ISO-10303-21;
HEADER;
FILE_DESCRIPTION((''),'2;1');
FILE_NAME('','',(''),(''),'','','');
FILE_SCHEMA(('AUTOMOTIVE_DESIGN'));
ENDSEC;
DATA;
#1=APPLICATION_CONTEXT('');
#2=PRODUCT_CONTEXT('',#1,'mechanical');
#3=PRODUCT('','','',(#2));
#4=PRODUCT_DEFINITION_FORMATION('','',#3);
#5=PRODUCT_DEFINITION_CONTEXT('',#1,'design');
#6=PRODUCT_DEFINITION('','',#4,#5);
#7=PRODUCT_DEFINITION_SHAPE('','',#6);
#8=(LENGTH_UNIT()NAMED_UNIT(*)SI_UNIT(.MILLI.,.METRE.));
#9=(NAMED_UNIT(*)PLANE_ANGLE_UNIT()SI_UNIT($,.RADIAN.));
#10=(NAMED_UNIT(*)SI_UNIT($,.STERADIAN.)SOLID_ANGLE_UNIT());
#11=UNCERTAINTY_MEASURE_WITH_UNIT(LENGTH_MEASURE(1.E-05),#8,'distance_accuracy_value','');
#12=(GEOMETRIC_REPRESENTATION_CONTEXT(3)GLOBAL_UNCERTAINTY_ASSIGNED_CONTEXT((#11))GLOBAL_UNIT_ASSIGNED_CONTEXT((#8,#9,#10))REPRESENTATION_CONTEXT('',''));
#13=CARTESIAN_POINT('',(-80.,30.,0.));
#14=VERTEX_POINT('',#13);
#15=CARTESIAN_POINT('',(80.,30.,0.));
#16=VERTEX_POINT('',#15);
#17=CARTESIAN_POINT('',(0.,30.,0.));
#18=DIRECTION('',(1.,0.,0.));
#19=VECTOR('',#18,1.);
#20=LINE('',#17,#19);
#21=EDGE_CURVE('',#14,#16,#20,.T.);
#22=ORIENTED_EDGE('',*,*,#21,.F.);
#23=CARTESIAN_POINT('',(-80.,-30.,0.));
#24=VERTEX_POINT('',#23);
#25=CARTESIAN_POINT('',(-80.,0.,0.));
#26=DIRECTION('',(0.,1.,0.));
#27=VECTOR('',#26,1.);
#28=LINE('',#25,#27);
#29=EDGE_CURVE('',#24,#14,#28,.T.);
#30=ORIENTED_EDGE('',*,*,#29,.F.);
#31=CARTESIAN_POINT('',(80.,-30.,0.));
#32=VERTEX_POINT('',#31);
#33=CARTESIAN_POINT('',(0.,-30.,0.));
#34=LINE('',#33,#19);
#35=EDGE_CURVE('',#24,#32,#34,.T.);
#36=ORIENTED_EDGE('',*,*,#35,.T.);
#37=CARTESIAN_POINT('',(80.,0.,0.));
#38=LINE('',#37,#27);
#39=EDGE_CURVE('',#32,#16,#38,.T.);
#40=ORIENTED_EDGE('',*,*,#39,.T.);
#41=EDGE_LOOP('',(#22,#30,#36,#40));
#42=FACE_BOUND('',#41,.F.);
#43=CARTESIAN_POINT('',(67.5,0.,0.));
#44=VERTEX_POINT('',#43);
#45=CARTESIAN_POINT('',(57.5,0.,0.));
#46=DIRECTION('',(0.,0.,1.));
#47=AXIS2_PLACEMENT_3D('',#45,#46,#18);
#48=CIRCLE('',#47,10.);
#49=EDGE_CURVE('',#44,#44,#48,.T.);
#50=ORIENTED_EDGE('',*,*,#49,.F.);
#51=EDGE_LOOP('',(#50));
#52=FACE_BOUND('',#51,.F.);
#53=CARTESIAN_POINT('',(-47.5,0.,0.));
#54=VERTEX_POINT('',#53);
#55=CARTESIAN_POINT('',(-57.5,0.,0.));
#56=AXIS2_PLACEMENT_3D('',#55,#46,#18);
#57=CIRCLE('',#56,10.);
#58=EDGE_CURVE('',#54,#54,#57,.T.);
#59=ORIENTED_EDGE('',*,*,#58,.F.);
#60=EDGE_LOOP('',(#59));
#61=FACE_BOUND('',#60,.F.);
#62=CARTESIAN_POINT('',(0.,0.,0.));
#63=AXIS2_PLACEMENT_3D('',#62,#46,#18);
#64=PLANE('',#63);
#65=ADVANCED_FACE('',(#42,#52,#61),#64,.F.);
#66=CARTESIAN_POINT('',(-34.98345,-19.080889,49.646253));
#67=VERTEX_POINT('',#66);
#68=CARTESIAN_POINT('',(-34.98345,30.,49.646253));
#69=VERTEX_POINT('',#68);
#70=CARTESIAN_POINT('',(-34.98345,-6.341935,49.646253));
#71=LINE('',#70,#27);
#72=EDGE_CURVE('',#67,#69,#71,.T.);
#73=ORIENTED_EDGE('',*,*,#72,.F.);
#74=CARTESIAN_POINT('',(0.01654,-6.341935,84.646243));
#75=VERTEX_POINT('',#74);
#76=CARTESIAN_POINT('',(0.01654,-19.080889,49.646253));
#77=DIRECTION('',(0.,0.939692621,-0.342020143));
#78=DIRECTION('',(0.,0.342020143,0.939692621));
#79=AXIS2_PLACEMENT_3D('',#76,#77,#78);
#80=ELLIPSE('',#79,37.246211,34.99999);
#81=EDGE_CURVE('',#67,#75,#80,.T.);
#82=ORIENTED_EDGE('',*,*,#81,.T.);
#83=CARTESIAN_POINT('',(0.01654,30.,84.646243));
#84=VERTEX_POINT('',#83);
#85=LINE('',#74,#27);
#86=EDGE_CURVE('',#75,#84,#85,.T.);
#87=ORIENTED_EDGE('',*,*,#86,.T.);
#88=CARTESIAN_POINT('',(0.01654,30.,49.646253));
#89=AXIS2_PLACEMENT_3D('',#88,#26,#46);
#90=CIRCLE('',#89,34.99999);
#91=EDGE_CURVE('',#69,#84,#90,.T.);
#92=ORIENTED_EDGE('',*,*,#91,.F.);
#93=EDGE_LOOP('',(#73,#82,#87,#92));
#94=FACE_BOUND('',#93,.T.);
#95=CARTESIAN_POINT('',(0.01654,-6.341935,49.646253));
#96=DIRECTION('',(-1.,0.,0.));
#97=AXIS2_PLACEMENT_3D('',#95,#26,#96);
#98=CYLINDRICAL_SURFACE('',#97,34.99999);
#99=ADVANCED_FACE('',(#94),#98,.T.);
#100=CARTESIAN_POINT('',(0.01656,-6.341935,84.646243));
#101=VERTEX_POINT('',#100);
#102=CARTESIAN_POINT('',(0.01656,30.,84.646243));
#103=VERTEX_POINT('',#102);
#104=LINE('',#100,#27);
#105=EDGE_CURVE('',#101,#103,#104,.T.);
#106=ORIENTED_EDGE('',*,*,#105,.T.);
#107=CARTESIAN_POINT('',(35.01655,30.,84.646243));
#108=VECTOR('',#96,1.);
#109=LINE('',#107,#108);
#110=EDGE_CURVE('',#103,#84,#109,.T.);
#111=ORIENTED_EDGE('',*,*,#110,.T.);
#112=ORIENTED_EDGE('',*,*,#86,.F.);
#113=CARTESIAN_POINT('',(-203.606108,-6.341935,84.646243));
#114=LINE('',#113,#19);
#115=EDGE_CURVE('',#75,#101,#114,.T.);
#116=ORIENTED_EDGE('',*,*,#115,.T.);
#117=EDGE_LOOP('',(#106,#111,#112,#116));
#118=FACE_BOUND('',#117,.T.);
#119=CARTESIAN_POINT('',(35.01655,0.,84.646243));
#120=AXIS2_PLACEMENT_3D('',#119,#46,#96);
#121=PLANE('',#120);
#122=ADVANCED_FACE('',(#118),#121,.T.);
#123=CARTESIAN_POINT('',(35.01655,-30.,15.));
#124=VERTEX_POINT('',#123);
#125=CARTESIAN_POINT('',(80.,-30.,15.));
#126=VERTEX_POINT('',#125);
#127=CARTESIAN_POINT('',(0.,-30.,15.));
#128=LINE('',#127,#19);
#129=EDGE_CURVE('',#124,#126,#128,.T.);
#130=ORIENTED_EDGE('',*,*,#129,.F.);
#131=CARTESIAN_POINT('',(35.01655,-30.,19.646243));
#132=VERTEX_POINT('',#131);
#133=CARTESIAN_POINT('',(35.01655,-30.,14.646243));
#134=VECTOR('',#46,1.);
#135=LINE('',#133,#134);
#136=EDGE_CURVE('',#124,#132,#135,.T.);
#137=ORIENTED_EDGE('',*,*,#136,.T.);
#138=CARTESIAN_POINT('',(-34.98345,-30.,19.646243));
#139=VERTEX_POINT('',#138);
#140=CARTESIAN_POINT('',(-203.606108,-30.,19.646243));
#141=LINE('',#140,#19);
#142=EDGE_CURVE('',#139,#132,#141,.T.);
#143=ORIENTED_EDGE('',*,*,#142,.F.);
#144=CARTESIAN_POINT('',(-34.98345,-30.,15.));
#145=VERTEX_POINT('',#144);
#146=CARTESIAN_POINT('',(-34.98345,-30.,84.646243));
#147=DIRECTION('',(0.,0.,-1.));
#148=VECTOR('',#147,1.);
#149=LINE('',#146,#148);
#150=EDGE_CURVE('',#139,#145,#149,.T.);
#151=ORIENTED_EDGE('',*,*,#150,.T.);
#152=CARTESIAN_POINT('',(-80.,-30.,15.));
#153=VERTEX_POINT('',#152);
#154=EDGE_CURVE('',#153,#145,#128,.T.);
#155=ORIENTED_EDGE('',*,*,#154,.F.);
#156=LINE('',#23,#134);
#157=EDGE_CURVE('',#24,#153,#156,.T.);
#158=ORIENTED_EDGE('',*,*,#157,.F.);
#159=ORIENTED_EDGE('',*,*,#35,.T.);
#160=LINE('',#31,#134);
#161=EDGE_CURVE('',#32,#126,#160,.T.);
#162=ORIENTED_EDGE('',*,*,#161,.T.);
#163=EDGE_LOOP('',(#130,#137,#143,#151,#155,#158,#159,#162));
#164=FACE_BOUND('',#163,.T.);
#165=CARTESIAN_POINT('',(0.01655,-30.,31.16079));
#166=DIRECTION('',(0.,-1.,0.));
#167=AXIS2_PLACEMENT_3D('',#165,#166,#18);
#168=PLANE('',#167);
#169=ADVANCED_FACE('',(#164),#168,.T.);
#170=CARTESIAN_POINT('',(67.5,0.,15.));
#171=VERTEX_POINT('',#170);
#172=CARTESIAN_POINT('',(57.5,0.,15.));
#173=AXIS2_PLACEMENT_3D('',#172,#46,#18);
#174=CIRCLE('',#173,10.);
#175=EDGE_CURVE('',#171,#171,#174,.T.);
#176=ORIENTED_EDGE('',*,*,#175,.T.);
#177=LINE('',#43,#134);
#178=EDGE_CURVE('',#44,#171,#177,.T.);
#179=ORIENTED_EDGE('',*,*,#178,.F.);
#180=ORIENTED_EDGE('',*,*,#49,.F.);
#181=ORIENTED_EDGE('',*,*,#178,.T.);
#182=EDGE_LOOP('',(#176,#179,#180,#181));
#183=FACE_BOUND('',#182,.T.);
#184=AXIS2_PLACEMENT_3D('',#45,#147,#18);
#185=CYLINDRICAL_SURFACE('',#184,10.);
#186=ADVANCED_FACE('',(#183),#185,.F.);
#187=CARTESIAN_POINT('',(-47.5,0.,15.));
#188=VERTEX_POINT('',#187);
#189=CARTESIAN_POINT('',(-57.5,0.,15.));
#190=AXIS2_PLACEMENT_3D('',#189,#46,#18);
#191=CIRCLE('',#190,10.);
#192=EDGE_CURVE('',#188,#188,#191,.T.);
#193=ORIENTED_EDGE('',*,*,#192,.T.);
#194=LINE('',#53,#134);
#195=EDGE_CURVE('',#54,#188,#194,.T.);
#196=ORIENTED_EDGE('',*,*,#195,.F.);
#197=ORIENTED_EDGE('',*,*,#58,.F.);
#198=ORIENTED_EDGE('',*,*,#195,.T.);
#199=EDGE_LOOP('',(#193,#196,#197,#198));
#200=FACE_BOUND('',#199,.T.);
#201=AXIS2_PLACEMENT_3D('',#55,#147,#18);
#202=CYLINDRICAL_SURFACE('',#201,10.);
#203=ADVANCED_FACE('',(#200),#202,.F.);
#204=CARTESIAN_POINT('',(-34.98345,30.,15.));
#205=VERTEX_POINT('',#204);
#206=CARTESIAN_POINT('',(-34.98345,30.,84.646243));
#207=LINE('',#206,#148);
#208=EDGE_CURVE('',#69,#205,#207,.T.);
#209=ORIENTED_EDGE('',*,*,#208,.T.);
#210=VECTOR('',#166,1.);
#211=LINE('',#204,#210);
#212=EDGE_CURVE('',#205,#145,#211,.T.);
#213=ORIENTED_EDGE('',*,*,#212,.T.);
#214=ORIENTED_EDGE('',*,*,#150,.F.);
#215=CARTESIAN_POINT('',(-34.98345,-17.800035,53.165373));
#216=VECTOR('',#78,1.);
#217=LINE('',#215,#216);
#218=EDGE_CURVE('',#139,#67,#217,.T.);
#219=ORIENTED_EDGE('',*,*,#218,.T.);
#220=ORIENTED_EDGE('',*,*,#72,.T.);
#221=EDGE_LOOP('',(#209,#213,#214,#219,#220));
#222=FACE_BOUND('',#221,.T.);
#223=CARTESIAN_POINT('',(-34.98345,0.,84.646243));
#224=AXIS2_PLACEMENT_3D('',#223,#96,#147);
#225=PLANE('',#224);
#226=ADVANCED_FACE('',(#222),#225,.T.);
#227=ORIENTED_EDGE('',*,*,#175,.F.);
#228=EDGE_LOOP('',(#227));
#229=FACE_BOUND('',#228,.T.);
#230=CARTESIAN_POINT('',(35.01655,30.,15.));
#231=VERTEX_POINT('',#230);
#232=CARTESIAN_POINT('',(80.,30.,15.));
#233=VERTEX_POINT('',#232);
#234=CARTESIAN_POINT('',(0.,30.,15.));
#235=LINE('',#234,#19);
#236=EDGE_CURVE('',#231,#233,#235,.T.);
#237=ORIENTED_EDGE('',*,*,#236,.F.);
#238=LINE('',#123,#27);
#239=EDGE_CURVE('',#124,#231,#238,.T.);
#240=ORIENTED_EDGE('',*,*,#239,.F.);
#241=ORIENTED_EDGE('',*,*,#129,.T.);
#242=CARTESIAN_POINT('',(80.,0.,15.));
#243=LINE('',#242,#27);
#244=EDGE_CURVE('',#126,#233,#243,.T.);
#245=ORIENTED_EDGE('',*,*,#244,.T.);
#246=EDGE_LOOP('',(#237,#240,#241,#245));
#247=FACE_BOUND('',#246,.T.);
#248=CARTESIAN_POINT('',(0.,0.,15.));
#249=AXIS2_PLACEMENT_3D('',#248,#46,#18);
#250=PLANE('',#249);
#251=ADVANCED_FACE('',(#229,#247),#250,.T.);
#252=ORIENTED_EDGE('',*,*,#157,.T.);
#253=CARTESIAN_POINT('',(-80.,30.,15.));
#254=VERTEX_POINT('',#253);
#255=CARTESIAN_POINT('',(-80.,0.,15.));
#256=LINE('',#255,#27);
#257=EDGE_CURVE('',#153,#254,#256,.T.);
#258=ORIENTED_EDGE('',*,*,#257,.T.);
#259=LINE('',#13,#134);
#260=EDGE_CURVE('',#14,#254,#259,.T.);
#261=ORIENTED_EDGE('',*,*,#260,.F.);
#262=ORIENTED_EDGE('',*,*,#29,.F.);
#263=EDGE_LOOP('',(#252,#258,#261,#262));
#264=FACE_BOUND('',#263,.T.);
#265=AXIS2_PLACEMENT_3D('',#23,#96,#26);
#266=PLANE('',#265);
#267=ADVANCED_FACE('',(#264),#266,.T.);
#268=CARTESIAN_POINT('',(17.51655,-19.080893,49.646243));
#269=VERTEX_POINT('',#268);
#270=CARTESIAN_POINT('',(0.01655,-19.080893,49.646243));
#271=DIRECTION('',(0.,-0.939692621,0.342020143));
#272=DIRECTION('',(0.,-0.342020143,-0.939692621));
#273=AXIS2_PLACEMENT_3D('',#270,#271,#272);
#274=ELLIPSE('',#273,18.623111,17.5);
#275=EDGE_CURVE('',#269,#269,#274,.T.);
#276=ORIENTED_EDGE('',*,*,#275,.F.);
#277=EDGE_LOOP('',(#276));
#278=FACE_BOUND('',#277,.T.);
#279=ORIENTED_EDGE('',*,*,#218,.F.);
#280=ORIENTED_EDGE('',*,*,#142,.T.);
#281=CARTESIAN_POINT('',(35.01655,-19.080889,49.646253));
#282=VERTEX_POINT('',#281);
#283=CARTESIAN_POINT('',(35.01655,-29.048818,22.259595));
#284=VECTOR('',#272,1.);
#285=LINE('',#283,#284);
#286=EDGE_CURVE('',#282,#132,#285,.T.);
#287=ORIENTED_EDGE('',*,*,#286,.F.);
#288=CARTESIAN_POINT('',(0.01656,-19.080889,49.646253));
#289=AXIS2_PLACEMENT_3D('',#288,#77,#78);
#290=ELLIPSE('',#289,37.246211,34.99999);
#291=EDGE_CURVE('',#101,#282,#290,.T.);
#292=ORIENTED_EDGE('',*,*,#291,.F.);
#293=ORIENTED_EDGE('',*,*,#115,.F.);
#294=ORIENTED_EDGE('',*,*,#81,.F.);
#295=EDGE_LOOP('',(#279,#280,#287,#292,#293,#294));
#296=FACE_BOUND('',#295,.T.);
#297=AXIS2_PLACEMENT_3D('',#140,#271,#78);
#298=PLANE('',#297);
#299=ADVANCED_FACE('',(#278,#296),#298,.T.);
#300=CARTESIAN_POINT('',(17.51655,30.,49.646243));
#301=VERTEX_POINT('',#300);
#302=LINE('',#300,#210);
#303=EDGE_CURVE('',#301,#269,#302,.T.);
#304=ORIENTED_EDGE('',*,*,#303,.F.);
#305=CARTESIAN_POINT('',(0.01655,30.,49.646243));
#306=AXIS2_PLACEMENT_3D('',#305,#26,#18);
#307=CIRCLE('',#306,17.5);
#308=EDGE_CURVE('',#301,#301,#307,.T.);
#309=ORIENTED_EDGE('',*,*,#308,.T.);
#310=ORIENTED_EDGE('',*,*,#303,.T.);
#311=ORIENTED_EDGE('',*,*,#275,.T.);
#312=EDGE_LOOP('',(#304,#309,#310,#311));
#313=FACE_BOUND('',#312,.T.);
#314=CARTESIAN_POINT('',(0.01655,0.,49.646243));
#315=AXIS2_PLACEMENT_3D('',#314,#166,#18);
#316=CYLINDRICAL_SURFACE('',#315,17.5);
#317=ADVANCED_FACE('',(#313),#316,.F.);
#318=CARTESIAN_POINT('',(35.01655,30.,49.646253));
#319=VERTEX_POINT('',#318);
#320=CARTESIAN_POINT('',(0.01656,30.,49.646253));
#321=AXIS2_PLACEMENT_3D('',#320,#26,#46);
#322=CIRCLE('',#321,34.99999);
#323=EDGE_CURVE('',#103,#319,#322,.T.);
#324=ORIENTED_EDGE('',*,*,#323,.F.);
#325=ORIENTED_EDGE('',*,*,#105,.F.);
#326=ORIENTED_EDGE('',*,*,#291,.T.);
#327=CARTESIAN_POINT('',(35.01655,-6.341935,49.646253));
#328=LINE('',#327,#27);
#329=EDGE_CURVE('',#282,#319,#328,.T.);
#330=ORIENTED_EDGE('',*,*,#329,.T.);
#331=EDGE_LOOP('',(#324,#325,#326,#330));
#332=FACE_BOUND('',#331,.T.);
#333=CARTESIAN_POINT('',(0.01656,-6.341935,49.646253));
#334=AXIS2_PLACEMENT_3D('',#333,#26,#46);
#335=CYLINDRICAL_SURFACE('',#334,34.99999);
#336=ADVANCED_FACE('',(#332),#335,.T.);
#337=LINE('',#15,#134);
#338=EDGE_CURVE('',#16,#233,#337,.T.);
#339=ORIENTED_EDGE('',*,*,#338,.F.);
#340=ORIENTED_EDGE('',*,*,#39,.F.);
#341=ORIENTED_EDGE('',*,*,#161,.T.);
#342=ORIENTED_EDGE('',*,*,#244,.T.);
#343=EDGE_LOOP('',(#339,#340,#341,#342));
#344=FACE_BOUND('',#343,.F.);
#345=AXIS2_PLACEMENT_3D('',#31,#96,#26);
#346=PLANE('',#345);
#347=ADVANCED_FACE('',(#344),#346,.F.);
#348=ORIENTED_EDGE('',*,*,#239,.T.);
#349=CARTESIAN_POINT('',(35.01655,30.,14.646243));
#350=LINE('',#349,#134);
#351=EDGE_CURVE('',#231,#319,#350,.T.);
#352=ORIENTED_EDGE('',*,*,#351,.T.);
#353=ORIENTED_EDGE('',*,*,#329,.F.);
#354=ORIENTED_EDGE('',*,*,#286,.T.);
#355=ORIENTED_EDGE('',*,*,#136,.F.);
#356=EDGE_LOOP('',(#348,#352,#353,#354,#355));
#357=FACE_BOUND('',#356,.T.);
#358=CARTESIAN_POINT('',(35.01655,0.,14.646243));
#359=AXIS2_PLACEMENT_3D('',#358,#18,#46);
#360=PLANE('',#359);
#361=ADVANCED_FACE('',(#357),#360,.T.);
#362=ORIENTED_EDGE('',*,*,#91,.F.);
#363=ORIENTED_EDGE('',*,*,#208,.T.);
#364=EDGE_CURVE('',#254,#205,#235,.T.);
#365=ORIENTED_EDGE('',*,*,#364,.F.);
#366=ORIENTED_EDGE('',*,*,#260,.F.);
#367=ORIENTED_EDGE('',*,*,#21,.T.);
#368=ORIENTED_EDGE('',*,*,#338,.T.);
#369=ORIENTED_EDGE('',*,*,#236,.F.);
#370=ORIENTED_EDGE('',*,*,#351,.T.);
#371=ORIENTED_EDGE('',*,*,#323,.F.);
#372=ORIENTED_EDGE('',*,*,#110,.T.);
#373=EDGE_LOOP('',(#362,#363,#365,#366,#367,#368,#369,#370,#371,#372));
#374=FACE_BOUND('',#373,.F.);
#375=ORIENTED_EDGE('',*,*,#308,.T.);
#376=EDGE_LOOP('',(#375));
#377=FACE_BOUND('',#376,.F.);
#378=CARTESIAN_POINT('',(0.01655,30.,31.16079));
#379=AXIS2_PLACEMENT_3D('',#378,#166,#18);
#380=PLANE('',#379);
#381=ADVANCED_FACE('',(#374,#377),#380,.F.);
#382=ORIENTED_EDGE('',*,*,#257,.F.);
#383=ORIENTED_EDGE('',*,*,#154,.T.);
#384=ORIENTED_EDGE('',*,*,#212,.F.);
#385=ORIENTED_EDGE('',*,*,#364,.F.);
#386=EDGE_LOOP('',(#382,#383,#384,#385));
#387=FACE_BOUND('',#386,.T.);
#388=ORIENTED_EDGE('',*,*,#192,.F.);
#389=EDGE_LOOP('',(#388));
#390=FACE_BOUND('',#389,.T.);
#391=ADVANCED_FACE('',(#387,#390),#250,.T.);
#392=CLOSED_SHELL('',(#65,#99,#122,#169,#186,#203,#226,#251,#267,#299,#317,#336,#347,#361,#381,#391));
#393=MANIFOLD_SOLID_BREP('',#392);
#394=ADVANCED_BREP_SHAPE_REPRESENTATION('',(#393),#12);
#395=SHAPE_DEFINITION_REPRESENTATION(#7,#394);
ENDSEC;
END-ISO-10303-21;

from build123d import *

# Parameters (mm, degrees)
F0_W          = 160
F0_H          = 60
F0_R          = 10
F1_DEPTH      = 15
F3_DEPTH      = 30
F3_DEPTH_BACK = 30
F4_T1_DEPTH   = 407.2453152316
F5_R          = 34.99999


# Not quite as in the source:
# - a fillet or chamfer that OpenCascade refuses, or shapes differently, is made with other operations: its cross-section is extruded or revolved along the edge and cut away or added
# - a fillet or chamfer is up to 0.001 mm smaller than in the source, because OpenCascade refuses the exact size


with BuildPart() as f1:
    # F0 (on Top) → F1 (new body)
    with BuildSketch(Plane.XY):
        Rectangle(F0_W, F0_H)
        with Locations((-57.5, 0)):
            Circle(F0_R, mode=Mode.SUBTRACT)
        with Locations((57.5, 0)):
            Circle(F0_R, mode=Mode.SUBTRACT)
    extrude(amount=F1_DEPTH)

    # F2 (on Front) → F3 (join, two sides)
    with BuildSketch(Plane.XZ) as f3_sk:
        with BuildLine():
            Line((35.0165497145, 49.646243304), (17.5165497145, 49.646243304))
            ThreePointArc((17.5165497145, 49.646243304), (0.0165497145, 32.146243304), (-17.4834502855, 49.646243304))
            Line((-17.4834502855, 49.646243304), (-34.9834502855, 49.646243304))
            Line((-34.9834502855, 49.646243304), (-34.9834502855, 14.646243304))
            Line((-34.9834502855, 14.646243304), (35.0165497145, 14.646243304))
            Line((35.0165497145, 14.646243304), (35.0165497145, 49.646243304))
        make_face()
        with BuildLine():
            ThreePointArc((-17.4834502855, 49.646243304), (0.0165497145, 67.146243304), (17.5165497145, 49.646243304))
            Line((17.5165497145, 49.646243304), (35.0165497145, 49.646243304))
            Line((35.0165497145, 49.646243304), (35.0165497145, 54.9693842517))
            Line((35.0165497145, 54.9693842517), (35.0165497145, 84.646243304))
            Line((35.0165497145, 84.646243304), (-34.9834502855, 84.646243304))
            Line((-34.9834502855, 84.646243304), (-34.9834502855, 49.646243304))
            Line((-34.9834502855, 49.646243304), (-17.4834502855, 49.646243304))
        make_face()
    extrude(amount=F3_DEPTH)
    extrude(f3_sk.sketch, amount=-F3_DEPTH_BACK)

    # F4: chamfer of 65 x 23.6580652273 on 1 edges, made by hand

    # F4_s2 → F4_t1 (cut)
    with BuildSketch(Plane.YZ.offset(-203.6061079013)):
        Polygon((-30, 19.646243304), (-6.3419347727, 84.646243304), (-30, 84.646243304), align=None)
    extrude(amount=F4_T1_DEPTH, mode=Mode.SUBTRACT)

    # F5 (radius 35 in the source; OpenCascade refuses exactly that, so slightly less here)
    f5_edges = [f1.edges().sort_by_distance(p)[0] for p in [
        (35.01655, 11.829033, 84.646243),
        (-34.98345, 11.829033, 84.646243),
    ]]
    fillet(f5_edges, radius=F5_R)


solid = f1.part
